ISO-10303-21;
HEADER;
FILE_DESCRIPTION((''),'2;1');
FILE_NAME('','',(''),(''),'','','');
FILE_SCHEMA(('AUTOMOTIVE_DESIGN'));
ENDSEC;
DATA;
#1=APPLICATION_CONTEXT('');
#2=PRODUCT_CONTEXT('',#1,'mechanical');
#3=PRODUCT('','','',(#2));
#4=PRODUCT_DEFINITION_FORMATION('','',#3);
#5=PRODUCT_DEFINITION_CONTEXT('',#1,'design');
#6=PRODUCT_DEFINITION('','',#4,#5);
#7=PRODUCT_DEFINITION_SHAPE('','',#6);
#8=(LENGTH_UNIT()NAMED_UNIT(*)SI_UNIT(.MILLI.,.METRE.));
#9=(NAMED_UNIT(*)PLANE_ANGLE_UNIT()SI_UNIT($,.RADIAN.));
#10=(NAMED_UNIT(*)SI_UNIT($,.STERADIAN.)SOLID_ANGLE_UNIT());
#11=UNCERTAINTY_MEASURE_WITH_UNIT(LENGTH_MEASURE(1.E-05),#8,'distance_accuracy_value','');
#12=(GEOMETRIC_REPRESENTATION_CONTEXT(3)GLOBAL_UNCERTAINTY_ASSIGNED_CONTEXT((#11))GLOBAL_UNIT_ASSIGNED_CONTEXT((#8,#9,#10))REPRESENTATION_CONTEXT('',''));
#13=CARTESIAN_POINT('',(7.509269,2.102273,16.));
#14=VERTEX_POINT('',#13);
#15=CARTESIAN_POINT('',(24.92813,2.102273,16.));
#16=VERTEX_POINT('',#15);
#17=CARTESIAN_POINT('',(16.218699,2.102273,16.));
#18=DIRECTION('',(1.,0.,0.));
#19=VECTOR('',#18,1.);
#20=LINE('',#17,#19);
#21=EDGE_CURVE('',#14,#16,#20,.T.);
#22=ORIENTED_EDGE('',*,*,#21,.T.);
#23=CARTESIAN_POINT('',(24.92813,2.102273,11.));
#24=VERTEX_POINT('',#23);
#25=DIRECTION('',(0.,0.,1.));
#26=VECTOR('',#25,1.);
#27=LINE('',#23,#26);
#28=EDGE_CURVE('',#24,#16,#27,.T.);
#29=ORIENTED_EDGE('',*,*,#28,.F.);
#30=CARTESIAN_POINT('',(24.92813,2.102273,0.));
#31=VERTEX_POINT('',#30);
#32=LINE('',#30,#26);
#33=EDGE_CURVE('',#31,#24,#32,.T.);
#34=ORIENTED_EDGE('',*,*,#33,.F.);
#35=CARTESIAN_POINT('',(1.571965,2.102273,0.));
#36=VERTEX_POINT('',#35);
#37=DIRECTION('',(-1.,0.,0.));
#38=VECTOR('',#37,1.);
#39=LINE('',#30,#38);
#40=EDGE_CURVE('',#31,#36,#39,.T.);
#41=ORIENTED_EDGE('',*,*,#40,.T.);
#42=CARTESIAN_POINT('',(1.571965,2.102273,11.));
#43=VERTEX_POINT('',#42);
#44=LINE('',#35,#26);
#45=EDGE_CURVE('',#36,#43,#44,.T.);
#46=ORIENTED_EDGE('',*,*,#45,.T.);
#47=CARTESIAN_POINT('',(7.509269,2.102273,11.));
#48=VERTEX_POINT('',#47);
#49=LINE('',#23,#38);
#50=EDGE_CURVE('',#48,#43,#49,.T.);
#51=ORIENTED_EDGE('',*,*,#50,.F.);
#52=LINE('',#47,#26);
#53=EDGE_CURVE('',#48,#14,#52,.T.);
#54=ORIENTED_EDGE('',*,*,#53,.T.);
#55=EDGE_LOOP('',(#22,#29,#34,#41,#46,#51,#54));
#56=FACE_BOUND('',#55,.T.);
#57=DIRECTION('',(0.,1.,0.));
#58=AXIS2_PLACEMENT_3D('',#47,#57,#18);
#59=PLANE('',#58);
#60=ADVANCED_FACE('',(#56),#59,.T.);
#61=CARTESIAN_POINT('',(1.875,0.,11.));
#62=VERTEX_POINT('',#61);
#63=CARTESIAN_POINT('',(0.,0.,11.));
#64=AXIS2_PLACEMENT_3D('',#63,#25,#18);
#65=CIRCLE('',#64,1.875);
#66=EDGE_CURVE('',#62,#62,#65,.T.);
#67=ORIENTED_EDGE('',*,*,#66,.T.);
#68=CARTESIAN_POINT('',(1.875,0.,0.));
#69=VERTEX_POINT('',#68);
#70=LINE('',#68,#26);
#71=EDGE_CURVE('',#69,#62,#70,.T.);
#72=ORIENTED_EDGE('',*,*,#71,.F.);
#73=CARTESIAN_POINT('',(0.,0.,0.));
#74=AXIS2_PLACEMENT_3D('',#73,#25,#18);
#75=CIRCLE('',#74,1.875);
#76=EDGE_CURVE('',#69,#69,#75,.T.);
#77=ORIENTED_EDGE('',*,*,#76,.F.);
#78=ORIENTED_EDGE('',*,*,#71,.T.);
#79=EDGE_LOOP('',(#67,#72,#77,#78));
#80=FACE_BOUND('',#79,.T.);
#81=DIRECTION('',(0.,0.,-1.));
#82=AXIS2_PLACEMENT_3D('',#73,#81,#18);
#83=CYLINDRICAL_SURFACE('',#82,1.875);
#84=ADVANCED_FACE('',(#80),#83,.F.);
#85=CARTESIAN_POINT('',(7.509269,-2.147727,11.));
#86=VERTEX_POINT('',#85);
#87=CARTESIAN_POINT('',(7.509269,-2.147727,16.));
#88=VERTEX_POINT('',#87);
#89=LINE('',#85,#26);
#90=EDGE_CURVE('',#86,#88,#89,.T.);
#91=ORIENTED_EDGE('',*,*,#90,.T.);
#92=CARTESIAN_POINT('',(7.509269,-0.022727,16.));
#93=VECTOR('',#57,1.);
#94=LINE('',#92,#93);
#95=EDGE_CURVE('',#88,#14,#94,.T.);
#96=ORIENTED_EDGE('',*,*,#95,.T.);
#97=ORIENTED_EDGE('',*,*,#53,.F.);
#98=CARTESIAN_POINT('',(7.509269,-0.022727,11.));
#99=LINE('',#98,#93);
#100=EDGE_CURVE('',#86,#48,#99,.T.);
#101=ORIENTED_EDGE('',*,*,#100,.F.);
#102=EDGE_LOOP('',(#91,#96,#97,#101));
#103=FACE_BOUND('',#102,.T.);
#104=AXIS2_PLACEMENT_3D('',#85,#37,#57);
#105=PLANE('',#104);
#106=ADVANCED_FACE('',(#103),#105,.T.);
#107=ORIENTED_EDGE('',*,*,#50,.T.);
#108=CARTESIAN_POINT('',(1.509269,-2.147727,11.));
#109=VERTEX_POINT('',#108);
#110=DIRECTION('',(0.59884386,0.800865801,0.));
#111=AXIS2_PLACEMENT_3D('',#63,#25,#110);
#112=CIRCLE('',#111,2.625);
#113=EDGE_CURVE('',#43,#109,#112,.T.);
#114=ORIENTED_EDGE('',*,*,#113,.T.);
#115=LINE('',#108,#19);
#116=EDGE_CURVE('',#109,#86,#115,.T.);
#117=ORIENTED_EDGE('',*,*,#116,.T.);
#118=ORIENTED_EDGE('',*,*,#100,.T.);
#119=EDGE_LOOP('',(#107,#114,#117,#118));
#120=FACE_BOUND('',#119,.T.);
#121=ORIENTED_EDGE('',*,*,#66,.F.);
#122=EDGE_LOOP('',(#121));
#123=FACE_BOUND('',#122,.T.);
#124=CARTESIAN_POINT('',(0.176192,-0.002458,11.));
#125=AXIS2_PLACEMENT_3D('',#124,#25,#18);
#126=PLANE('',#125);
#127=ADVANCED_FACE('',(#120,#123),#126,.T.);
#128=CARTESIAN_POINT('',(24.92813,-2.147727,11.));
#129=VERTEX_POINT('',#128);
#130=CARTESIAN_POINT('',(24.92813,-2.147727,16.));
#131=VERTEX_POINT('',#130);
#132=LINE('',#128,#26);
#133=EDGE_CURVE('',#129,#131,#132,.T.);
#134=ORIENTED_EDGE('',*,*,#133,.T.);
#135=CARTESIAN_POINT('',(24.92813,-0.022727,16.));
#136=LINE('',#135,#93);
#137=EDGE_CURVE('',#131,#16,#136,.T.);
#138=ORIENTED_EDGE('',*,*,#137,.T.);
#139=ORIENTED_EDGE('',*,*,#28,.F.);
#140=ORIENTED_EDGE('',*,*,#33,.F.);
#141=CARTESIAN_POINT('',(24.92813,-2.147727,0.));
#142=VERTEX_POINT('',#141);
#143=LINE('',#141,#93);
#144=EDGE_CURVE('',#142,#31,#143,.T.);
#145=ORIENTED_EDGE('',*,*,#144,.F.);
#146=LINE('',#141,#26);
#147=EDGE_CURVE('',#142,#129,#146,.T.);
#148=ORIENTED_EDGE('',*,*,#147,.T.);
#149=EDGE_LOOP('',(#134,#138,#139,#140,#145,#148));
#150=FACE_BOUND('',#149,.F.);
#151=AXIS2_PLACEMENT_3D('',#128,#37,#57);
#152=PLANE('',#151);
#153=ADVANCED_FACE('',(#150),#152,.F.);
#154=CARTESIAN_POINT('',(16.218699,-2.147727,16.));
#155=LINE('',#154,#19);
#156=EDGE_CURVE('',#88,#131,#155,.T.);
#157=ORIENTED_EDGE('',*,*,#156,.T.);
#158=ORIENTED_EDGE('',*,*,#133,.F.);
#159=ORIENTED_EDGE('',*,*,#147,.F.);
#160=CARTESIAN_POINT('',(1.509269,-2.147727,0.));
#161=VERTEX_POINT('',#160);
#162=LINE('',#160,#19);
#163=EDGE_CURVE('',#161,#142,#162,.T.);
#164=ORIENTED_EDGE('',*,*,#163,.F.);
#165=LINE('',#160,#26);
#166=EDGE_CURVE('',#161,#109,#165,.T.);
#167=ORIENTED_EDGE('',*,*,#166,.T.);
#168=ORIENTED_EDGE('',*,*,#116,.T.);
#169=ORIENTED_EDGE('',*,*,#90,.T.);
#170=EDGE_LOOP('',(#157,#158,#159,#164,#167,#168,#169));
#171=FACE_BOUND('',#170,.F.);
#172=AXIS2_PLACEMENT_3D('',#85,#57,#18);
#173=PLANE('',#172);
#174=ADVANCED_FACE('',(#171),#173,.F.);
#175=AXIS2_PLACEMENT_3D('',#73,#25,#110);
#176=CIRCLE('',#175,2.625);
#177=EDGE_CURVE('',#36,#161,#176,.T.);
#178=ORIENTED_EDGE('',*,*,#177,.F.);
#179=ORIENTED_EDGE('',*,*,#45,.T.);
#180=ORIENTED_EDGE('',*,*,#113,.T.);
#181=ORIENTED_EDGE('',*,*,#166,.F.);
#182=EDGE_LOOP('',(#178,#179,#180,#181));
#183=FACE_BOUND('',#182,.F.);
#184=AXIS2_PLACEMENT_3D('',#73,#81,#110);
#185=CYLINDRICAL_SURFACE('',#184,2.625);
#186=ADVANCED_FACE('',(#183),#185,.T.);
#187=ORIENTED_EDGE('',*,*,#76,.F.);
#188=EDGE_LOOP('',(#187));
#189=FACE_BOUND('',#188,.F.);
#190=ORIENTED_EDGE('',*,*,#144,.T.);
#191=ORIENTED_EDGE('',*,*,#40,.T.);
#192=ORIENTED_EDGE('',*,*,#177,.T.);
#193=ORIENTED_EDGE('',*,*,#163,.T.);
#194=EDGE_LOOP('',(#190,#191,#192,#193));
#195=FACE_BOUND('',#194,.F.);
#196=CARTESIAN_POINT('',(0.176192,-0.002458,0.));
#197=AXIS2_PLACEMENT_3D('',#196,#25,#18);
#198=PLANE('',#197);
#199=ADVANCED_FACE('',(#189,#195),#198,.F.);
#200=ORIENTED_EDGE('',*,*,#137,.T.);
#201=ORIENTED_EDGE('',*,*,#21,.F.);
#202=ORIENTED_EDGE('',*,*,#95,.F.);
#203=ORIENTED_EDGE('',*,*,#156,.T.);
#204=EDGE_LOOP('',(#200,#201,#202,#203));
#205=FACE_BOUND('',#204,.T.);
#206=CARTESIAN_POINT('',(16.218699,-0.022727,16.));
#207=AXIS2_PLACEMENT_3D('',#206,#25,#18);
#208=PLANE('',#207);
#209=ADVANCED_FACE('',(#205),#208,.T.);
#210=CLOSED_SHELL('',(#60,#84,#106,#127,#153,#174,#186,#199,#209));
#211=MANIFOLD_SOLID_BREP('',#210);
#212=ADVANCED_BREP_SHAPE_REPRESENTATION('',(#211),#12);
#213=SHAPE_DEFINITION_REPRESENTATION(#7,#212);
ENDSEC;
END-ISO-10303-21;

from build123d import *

# Parameters (mm, degrees)
F0_R     = 1.875
F1_DEPTH = 11
F2_W     = 17.4188611699
F2_H     = 4.25
F3_DEPTH = 5


# Not quite as in the source:
# - a feature names something its author has since deleted; it is built from what else it names


with BuildPart() as f1:
    # F0 (on Top) → F1 (new body)
    with BuildSketch(Plane.XY):
        with BuildLine():
            ThreePointArc((1.5092688833, -2.1477272727), (2.3294265194, -1.2101227585), (2.625, 0))
            ThreePointArc((2.625, 0), (2.347022952, 1.1756310061), (1.5719651333, 2.1022727273))
            ThreePointArc((1.5719651333, 2.1022727273), (-2.6247144161, 0.0387199415), (1.5092688833, -2.1477272727))
        make_face()
        Circle(F0_R, mode=Mode.SUBTRACT)
        with BuildLine():
            ThreePointArc((1.5719651333, 2.1022727273), (2.347022952, 1.1756310061), (2.625, 0))
            ThreePointArc((2.625, 0), (2.3294265194, -1.2101227585), (1.5092688833, -2.1477272727))
            Line((1.5092688833, -2.1477272727), (24.9281300532, -2.1477272727))
            Line((24.9281300532, -2.1477272727), (24.9281300532, 2.1022727273))
            Line((24.9281300532, 2.1022727273), (1.5719651333, 2.1022727273))
        make_face()
    extrude(amount=F1_DEPTH)

    # F2 (on face) → F3 (join)
    with BuildSketch(Plane.XY.offset(11)):
        with Locations((16.2186994682, -0.0227272727)):
            Rectangle(F2_W, F2_H)
    extrude(amount=F3_DEPTH)


solid = f1.part
